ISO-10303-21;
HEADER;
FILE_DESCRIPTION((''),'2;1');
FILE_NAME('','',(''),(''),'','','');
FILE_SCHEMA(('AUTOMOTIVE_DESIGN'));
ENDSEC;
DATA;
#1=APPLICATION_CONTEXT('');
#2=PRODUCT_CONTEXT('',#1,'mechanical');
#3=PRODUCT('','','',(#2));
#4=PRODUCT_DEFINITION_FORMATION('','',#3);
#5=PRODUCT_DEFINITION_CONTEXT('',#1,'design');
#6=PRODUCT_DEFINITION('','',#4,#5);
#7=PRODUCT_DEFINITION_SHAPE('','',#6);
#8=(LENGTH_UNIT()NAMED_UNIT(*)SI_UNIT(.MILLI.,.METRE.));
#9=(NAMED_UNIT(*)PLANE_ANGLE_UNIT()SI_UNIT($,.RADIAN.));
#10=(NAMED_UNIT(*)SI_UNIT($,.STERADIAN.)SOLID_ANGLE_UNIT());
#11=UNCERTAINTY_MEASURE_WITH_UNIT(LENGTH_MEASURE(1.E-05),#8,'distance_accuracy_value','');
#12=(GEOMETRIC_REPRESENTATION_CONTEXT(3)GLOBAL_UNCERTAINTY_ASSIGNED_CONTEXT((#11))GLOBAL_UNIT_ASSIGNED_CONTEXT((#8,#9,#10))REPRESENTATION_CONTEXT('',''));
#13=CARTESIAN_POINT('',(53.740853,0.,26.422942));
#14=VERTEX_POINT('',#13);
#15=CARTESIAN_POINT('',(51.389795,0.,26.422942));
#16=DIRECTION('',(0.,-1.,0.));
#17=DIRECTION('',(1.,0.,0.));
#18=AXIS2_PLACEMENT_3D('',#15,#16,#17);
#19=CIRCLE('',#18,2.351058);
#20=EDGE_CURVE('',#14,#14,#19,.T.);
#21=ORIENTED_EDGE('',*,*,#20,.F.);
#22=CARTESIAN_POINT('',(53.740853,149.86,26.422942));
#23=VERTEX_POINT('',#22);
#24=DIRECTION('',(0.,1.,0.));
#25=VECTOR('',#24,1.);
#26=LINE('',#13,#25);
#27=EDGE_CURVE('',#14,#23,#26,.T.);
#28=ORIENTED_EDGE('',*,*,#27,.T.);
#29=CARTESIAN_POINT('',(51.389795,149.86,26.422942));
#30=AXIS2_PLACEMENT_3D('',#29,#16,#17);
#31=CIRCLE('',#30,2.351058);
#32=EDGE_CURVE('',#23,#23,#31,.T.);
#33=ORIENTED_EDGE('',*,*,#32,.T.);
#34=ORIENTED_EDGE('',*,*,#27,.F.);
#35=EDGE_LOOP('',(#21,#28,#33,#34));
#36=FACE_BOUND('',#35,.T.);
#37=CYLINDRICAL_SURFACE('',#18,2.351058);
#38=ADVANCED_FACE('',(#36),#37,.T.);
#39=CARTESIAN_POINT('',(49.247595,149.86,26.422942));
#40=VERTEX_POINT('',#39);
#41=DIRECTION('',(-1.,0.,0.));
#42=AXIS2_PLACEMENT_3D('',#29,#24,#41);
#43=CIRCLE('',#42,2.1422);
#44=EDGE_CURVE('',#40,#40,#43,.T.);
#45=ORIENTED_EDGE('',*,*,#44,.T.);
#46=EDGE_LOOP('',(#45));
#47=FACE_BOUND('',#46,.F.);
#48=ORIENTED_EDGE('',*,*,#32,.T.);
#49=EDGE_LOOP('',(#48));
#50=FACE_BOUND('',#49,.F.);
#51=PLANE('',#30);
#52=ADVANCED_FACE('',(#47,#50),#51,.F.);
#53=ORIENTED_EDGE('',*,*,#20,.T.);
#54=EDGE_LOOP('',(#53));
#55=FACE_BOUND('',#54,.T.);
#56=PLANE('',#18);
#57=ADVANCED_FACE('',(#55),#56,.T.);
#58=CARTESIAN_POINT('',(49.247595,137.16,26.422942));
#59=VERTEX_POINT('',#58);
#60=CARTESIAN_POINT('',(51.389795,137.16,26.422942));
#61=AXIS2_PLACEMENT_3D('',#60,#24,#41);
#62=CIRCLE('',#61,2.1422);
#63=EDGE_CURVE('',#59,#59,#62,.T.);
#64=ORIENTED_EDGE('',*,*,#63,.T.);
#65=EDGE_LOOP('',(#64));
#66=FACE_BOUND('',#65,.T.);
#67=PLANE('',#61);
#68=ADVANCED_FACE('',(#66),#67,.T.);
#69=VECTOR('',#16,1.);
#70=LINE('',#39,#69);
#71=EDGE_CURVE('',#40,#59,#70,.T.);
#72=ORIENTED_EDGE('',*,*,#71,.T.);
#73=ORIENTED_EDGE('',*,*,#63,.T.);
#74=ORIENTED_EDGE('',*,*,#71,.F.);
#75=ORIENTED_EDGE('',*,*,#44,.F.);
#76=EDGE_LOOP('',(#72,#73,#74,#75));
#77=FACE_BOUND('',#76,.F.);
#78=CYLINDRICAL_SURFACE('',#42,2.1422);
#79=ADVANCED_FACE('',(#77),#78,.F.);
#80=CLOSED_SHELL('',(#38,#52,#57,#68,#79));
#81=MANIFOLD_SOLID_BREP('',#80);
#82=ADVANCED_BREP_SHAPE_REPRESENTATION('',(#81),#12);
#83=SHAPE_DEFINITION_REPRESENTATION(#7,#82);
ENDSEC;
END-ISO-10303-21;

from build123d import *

# Parameters (mm, degrees)
F0_R     = 2.3510578695
F1_DEPTH = 149.86
F2_R     = 2.1421999077
F3_DEPTH = 12.7


# Not quite as in the source:
# - the program builds the solid bodies; features that only make, move or delete a surface that nothing else refers to are left out


with BuildPart() as f1:
    # F0 (on Front) → F1 (new body)
    with BuildSketch(Plane.XZ):
        with Locations((51.3897947967, 26.4229420573)):
            Circle(F0_R)
    extrude(amount=-F1_DEPTH)

    # F2 (on face) → F3 (cut)
    with BuildSketch(Plane(origin=(0, 149.86, 0), x_dir=(-1, 0, 0), z_dir=(0, 1, 0))):
        with Locations((-51.3897947967, 26.4229420573)):
            Circle(F2_R)
    extrude(amount=-F3_DEPTH, mode=Mode.SUBTRACT)


solid = f1.part
